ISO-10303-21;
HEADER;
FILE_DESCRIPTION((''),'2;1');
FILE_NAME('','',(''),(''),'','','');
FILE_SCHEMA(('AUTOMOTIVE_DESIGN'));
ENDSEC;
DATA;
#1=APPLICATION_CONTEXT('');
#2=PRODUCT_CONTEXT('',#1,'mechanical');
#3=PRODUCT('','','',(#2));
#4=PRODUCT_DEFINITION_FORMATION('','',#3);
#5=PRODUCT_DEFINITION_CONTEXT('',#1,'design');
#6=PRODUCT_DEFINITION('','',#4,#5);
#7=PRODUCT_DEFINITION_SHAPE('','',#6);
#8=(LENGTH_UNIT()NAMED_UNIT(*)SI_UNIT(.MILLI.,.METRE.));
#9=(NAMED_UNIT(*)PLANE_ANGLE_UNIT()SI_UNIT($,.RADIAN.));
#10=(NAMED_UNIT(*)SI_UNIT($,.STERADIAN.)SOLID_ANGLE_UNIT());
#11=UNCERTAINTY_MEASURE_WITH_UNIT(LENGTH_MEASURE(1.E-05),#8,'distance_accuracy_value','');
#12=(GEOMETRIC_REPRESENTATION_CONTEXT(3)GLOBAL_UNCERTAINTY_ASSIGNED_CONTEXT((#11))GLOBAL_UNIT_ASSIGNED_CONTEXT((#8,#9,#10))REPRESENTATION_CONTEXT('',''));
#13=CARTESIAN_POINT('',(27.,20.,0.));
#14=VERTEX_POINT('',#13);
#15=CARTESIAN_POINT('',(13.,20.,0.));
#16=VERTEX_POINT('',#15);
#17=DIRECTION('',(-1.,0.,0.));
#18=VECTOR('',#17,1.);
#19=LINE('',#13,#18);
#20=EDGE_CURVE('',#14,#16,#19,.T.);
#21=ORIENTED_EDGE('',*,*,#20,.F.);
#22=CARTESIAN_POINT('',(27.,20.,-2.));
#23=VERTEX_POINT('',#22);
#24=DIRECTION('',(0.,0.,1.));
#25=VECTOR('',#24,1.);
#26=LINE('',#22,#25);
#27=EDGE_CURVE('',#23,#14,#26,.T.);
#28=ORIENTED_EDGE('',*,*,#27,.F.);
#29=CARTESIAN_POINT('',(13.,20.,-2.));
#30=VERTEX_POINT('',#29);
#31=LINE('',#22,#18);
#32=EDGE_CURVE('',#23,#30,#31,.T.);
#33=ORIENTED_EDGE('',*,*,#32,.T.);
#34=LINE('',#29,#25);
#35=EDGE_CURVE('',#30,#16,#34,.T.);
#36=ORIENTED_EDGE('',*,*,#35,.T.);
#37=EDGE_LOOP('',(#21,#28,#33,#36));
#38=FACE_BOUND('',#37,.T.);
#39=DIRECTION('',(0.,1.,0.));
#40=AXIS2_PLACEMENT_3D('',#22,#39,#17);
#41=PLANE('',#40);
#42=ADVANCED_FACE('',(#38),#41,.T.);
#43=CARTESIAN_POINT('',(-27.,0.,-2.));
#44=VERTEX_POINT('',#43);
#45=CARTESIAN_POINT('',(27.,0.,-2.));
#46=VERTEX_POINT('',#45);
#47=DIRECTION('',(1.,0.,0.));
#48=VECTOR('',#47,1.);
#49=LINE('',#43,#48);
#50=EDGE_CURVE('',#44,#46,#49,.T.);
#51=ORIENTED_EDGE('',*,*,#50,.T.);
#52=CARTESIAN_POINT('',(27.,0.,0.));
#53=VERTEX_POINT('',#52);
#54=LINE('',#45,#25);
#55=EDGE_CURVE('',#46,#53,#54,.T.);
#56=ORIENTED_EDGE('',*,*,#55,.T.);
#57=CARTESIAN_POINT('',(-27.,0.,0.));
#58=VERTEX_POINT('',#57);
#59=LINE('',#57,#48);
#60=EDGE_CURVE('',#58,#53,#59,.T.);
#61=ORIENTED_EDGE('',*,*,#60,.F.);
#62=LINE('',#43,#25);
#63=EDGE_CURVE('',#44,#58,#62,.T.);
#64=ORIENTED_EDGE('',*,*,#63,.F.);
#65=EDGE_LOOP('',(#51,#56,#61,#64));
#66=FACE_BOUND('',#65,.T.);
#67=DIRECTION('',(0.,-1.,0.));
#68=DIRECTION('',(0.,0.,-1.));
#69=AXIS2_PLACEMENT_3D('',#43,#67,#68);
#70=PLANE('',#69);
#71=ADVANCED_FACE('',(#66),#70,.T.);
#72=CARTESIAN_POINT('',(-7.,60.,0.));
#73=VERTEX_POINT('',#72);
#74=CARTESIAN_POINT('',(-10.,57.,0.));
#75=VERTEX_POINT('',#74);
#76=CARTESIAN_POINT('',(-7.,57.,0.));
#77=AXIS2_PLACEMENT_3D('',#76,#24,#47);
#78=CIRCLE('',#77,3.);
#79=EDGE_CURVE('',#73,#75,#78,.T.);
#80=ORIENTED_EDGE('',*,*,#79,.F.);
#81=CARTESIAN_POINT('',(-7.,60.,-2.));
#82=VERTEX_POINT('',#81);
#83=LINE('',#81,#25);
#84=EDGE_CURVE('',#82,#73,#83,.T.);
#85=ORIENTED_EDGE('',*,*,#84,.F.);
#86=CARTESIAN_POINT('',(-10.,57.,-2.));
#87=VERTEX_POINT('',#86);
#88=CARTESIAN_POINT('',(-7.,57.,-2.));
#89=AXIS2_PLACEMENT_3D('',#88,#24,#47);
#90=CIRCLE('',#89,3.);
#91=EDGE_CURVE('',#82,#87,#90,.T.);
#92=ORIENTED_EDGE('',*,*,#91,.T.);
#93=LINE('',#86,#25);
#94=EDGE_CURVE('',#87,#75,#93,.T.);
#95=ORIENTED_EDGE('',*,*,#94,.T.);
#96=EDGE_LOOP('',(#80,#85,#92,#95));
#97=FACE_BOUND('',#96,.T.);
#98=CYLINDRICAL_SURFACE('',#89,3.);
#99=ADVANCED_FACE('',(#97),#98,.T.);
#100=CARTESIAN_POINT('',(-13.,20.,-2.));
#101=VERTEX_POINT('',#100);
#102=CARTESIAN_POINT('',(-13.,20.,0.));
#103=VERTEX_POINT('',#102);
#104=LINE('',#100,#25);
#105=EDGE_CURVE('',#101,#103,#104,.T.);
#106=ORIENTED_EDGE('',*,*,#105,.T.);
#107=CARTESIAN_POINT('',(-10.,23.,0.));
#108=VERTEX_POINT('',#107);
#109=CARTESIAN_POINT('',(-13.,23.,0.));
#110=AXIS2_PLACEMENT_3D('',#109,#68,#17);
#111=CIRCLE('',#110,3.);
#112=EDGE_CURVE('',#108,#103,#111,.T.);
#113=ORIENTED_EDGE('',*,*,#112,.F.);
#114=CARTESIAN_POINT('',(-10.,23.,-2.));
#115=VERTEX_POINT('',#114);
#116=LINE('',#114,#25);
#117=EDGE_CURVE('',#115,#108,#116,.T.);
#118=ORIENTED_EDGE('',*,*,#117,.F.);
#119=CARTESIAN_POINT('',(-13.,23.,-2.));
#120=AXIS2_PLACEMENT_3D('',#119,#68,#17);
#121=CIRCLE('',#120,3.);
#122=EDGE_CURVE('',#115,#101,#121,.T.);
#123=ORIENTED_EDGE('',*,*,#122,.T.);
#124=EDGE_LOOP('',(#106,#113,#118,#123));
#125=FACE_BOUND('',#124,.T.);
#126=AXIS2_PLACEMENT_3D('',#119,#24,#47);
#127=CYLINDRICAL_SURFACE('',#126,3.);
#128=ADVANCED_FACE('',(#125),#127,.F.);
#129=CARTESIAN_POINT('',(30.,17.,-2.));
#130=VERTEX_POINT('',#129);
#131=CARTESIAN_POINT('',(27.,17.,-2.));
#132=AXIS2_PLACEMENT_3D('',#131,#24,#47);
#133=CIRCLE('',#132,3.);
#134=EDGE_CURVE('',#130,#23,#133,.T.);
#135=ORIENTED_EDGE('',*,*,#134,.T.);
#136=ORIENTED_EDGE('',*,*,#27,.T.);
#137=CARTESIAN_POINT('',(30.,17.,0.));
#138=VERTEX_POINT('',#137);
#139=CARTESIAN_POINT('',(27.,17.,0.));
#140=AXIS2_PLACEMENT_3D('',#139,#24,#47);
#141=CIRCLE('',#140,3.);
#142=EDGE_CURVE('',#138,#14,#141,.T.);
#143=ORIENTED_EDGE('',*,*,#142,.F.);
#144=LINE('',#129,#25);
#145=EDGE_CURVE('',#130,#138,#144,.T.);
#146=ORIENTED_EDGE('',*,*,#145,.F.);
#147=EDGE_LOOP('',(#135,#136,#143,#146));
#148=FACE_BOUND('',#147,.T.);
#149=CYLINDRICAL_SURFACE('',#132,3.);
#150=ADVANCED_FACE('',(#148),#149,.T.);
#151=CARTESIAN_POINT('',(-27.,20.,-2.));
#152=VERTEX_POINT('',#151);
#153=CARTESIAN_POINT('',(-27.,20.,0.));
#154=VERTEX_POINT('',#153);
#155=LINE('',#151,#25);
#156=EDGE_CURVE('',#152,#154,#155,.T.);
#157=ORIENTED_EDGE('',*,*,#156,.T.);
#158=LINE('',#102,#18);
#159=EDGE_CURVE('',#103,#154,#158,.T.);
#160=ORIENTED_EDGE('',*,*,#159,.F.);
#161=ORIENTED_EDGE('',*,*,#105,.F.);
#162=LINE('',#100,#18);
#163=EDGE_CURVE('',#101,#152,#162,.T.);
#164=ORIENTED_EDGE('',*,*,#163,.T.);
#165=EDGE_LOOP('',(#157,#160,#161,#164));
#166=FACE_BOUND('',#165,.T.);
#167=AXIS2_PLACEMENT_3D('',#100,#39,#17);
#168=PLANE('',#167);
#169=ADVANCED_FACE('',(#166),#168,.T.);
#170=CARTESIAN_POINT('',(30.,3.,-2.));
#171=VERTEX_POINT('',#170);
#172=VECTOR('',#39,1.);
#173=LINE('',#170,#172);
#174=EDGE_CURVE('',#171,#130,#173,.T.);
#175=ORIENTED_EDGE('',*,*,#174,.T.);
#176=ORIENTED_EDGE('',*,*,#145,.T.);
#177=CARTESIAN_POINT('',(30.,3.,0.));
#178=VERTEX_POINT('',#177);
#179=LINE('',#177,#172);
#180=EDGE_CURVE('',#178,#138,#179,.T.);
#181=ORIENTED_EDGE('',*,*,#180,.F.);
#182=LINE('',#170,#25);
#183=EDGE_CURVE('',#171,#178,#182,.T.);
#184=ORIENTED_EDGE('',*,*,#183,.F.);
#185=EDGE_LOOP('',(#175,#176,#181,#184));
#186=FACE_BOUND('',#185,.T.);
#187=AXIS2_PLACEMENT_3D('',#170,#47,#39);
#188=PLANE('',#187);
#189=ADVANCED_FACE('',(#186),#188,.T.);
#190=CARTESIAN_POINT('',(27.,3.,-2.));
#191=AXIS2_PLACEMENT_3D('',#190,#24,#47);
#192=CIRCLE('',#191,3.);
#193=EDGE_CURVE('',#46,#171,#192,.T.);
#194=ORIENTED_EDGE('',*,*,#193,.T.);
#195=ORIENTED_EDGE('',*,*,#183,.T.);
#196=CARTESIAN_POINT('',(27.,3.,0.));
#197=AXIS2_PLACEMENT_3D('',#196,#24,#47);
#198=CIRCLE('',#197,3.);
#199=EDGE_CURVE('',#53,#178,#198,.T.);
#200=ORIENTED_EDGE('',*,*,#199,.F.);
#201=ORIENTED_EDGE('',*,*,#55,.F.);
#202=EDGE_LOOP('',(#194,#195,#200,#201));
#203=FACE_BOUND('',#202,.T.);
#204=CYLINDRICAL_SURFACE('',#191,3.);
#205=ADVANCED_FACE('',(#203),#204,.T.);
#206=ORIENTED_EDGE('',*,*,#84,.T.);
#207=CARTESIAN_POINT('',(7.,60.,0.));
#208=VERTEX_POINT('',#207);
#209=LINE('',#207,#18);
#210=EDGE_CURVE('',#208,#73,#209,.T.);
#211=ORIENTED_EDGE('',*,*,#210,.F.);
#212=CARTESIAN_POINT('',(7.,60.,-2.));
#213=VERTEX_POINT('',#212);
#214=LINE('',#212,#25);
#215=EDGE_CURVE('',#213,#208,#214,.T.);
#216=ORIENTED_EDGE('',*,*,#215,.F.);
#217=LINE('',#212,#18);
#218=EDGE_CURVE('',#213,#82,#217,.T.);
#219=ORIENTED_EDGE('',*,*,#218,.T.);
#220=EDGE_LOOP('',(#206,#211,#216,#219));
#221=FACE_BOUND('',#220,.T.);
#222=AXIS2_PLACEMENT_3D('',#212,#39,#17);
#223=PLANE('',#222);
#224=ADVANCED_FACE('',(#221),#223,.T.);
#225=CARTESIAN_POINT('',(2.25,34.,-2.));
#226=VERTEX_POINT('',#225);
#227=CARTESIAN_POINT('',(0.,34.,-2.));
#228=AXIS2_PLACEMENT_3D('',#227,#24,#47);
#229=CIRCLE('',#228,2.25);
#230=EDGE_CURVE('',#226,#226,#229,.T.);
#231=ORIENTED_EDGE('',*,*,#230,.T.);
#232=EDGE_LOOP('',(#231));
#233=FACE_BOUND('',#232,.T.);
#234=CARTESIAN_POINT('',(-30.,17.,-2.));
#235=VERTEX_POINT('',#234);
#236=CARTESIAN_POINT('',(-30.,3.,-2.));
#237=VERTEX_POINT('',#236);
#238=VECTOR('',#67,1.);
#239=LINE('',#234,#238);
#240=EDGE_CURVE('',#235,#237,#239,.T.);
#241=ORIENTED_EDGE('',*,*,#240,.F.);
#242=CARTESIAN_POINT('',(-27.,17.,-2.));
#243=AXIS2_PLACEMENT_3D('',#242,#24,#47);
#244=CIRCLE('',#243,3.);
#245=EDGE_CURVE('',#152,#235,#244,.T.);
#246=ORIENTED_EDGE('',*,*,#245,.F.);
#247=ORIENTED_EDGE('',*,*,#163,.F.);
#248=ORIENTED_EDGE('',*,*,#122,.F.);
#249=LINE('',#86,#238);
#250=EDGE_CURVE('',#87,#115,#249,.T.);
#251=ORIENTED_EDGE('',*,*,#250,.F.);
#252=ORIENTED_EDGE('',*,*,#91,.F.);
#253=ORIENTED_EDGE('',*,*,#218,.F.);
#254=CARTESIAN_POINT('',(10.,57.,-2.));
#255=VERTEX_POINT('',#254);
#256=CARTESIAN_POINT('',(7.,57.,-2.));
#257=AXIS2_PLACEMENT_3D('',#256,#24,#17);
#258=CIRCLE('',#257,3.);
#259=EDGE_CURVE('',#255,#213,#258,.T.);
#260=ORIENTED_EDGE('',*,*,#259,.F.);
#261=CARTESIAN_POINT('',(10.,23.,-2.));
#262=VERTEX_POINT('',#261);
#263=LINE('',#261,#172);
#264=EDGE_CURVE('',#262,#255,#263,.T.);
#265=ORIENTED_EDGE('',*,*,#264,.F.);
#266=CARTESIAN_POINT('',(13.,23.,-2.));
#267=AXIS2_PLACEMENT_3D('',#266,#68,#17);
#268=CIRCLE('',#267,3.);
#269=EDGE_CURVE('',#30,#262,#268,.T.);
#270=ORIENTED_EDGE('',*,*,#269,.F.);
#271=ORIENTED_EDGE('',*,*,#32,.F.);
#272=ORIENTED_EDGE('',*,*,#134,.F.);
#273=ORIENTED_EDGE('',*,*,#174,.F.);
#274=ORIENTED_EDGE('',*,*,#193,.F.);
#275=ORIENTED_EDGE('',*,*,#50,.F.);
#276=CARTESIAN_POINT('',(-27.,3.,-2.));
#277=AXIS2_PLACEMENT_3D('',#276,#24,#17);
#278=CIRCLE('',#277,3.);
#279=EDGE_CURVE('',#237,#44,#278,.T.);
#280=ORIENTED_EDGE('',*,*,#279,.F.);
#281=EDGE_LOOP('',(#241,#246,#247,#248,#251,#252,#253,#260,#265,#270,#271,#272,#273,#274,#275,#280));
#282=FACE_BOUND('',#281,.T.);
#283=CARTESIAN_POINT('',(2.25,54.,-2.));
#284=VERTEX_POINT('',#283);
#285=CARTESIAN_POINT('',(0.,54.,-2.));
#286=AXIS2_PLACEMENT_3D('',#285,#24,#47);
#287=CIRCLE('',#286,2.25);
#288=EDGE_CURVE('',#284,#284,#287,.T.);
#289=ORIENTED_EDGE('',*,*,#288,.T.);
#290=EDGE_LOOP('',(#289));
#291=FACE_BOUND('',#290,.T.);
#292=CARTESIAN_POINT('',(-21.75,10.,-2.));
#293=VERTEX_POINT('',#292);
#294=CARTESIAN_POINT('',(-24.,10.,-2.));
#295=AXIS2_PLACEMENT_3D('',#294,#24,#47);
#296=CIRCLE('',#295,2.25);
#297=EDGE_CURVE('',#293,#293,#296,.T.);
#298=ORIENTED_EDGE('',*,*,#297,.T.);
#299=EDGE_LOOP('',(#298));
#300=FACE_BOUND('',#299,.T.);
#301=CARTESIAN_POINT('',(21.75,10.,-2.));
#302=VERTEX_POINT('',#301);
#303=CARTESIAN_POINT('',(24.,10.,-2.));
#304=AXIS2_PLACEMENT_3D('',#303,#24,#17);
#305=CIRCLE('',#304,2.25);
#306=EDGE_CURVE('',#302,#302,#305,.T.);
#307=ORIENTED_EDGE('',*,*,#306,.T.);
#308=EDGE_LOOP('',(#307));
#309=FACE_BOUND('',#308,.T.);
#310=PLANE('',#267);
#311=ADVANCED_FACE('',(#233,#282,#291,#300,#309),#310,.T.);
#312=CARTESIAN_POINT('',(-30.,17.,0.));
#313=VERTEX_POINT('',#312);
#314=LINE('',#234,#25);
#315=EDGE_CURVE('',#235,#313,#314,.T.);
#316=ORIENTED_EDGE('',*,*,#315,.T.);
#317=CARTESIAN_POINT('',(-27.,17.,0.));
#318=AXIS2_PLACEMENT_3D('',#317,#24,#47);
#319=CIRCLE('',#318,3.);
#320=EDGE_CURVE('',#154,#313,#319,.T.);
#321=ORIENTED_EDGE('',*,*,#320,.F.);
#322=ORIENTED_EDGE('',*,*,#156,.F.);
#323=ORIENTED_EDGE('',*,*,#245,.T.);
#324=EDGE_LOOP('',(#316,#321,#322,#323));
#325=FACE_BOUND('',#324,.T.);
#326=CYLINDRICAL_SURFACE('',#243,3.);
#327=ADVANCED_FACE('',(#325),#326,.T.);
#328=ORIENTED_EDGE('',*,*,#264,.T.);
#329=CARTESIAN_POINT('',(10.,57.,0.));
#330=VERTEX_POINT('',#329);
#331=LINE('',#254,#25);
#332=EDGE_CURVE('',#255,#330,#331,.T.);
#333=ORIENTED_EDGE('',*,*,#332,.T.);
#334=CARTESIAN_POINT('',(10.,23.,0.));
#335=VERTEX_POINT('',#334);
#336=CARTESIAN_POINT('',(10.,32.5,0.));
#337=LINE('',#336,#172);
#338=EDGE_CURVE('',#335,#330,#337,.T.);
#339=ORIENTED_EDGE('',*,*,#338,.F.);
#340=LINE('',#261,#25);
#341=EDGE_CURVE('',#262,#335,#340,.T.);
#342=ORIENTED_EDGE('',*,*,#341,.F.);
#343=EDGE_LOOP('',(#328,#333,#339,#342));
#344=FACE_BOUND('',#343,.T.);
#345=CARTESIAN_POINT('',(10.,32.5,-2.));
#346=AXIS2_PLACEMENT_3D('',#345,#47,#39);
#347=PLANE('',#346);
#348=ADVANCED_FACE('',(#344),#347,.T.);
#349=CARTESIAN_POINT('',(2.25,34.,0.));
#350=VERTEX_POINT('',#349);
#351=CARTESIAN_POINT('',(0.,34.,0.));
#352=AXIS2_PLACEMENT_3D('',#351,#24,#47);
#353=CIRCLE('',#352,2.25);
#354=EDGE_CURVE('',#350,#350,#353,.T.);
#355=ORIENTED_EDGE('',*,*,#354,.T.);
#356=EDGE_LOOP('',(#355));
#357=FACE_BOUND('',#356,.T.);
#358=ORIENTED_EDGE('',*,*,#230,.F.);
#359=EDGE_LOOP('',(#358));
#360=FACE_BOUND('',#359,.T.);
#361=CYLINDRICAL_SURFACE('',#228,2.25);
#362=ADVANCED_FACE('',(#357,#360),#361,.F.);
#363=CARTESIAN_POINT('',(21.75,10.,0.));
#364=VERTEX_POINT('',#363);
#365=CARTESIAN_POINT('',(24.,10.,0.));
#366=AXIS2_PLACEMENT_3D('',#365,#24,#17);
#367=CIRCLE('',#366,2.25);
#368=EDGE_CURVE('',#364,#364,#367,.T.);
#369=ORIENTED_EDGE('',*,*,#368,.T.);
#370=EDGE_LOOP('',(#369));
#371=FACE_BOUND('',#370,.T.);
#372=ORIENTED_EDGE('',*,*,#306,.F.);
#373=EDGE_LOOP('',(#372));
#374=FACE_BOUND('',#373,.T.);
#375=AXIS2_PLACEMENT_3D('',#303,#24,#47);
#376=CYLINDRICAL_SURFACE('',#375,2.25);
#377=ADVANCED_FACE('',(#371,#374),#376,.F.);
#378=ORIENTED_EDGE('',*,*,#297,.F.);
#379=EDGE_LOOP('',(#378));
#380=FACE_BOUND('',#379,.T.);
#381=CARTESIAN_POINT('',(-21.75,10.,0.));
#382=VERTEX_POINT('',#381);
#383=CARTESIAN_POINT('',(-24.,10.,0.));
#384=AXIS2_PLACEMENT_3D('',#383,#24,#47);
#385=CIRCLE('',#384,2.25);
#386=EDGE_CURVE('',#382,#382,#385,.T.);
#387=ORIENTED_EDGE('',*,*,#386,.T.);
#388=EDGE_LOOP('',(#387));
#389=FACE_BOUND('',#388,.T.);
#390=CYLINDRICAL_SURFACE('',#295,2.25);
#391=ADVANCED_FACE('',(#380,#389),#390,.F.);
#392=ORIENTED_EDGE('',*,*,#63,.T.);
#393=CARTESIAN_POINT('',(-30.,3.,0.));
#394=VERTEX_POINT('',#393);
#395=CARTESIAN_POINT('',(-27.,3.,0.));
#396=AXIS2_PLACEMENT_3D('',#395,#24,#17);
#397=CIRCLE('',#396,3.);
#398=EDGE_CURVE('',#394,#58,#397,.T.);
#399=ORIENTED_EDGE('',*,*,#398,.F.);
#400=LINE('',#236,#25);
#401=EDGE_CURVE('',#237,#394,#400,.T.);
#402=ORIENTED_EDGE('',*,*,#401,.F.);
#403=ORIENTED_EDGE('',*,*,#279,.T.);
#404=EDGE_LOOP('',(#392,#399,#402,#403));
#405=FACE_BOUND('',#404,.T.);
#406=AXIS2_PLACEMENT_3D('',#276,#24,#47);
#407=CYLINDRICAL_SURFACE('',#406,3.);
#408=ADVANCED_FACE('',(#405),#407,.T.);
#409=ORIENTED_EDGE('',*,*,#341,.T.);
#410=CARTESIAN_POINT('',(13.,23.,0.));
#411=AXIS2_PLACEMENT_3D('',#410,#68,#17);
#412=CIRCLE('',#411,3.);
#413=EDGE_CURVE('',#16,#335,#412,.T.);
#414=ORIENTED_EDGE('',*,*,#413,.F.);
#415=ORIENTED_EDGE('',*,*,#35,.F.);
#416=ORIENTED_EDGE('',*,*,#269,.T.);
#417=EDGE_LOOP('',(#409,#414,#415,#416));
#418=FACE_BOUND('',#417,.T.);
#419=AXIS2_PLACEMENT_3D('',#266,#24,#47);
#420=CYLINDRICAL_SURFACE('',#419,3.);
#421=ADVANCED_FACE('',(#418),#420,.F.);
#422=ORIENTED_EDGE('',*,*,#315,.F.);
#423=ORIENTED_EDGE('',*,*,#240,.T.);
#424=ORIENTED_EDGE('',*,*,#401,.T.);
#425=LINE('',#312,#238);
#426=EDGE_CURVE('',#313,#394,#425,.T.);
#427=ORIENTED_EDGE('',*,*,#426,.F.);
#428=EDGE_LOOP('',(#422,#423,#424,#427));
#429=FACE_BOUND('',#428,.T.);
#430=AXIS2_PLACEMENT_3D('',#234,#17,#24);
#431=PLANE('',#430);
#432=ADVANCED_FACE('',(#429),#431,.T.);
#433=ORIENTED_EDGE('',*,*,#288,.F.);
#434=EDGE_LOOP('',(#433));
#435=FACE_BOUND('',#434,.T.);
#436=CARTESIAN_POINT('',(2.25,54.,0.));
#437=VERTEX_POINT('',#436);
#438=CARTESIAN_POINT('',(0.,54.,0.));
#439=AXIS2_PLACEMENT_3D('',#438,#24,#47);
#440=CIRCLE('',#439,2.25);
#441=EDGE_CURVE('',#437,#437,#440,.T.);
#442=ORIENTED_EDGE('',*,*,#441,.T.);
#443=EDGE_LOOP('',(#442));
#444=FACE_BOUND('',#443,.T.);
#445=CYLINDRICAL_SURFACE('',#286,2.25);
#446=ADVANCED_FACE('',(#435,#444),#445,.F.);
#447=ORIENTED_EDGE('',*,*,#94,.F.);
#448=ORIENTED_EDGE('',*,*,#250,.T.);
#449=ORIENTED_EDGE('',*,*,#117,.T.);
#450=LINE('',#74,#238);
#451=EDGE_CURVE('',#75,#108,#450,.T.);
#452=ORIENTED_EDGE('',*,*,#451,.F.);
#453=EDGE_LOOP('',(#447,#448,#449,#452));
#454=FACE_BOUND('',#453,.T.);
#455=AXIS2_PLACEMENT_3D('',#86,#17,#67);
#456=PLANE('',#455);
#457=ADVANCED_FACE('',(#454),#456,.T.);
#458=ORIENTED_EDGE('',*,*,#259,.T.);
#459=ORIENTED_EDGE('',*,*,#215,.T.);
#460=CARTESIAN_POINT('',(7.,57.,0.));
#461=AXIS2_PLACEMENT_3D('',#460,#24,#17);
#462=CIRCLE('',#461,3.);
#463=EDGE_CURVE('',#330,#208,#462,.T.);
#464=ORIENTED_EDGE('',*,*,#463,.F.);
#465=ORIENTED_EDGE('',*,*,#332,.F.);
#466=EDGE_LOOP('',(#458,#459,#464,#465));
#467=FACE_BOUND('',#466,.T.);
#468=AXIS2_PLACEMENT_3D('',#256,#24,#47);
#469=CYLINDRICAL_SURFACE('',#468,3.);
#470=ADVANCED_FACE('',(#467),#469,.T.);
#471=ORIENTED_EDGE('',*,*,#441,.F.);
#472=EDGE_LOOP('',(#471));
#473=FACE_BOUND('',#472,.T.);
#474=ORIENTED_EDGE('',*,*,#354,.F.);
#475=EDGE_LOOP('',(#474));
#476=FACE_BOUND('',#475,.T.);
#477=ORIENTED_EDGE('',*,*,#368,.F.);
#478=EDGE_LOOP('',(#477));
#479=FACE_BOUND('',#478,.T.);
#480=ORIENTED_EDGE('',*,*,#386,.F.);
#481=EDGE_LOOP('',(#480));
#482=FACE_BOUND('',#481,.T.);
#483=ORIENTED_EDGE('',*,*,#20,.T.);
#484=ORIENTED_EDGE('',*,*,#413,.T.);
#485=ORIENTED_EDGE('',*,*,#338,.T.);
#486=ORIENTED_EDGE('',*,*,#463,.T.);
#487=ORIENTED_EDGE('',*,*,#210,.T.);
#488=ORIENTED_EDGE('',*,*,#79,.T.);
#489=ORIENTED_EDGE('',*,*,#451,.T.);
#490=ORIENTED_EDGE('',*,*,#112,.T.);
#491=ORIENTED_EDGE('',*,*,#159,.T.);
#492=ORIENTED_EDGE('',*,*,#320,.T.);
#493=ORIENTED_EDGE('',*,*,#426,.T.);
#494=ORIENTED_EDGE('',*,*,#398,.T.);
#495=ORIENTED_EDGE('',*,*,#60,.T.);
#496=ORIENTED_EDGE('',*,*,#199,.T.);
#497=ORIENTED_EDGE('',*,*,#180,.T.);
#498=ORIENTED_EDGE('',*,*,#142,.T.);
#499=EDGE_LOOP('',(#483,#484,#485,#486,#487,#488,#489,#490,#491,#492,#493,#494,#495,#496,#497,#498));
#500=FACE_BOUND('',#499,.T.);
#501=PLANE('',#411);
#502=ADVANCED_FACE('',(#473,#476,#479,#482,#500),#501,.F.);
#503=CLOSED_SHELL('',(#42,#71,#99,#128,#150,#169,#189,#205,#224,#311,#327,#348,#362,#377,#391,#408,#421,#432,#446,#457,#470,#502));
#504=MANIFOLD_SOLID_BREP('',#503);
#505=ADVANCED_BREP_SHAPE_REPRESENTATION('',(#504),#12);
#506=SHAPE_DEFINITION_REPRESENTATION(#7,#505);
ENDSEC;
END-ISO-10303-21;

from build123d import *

# Parameters (mm, degrees)
SKETCH_1_R             = 2.25
SM_BASE_FLANGE_1_DEPTH = 2


# Sheet-metal steps are written as plain solids
with BuildPart() as part:
    # Sketch 1 → 基体-法兰1 (new body)
    with BuildSketch(Plane.XY):
        with BuildLine():
            Line((-27, 0), (27, 0))
            ThreePointArc((27, 0), (29.121320344, 0.878679656), (30, 3))
            Line((30, 3), (30, 17))
            ThreePointArc((30, 17), (29.121320344, 19.121320344), (27, 20))
            Line((27, 20), (13, 20))
            ThreePointArc((13, 20), (10.878679656, 20.878679656), (10, 23))
            Line((10, 23), (10, 32.5))
            Line((10, 32.5), (10, 57))
            ThreePointArc((10, 57), (9.121320344, 59.121320344), (7, 60))
            Line((7, 60), (-7, 60))
            ThreePointArc((-7, 60), (-9.121320344, 59.121320344), (-10, 57))
            Line((-10, 57), (-10, 23))
            ThreePointArc((-10, 23), (-10.878679656, 20.878679656), (-13, 20))
            Line((-13, 20), (-27, 20))
            ThreePointArc((-27, 20), (-29.121320344, 19.121320344), (-30, 17))
            Line((-30, 17), (-30, 3))
            ThreePointArc((-30, 3), (-29.121320344, 0.878679656), (-27, 0))
        make_face()
        with Locations((-24, 10)):
            Circle(SKETCH_1_R, mode=Mode.SUBTRACT)
        with Locations(Location((24, 10, 0), (0, 0, 180))):
            Circle(SKETCH_1_R, mode=Mode.SUBTRACT)
        with Locations((0, 54)):
            Circle(SKETCH_1_R, mode=Mode.SUBTRACT)
        with Locations((0, 34)):
            Circle(SKETCH_1_R, mode=Mode.SUBTRACT)
    extrude(amount=-SM_BASE_FLANGE_1_DEPTH)


solid = part.part
